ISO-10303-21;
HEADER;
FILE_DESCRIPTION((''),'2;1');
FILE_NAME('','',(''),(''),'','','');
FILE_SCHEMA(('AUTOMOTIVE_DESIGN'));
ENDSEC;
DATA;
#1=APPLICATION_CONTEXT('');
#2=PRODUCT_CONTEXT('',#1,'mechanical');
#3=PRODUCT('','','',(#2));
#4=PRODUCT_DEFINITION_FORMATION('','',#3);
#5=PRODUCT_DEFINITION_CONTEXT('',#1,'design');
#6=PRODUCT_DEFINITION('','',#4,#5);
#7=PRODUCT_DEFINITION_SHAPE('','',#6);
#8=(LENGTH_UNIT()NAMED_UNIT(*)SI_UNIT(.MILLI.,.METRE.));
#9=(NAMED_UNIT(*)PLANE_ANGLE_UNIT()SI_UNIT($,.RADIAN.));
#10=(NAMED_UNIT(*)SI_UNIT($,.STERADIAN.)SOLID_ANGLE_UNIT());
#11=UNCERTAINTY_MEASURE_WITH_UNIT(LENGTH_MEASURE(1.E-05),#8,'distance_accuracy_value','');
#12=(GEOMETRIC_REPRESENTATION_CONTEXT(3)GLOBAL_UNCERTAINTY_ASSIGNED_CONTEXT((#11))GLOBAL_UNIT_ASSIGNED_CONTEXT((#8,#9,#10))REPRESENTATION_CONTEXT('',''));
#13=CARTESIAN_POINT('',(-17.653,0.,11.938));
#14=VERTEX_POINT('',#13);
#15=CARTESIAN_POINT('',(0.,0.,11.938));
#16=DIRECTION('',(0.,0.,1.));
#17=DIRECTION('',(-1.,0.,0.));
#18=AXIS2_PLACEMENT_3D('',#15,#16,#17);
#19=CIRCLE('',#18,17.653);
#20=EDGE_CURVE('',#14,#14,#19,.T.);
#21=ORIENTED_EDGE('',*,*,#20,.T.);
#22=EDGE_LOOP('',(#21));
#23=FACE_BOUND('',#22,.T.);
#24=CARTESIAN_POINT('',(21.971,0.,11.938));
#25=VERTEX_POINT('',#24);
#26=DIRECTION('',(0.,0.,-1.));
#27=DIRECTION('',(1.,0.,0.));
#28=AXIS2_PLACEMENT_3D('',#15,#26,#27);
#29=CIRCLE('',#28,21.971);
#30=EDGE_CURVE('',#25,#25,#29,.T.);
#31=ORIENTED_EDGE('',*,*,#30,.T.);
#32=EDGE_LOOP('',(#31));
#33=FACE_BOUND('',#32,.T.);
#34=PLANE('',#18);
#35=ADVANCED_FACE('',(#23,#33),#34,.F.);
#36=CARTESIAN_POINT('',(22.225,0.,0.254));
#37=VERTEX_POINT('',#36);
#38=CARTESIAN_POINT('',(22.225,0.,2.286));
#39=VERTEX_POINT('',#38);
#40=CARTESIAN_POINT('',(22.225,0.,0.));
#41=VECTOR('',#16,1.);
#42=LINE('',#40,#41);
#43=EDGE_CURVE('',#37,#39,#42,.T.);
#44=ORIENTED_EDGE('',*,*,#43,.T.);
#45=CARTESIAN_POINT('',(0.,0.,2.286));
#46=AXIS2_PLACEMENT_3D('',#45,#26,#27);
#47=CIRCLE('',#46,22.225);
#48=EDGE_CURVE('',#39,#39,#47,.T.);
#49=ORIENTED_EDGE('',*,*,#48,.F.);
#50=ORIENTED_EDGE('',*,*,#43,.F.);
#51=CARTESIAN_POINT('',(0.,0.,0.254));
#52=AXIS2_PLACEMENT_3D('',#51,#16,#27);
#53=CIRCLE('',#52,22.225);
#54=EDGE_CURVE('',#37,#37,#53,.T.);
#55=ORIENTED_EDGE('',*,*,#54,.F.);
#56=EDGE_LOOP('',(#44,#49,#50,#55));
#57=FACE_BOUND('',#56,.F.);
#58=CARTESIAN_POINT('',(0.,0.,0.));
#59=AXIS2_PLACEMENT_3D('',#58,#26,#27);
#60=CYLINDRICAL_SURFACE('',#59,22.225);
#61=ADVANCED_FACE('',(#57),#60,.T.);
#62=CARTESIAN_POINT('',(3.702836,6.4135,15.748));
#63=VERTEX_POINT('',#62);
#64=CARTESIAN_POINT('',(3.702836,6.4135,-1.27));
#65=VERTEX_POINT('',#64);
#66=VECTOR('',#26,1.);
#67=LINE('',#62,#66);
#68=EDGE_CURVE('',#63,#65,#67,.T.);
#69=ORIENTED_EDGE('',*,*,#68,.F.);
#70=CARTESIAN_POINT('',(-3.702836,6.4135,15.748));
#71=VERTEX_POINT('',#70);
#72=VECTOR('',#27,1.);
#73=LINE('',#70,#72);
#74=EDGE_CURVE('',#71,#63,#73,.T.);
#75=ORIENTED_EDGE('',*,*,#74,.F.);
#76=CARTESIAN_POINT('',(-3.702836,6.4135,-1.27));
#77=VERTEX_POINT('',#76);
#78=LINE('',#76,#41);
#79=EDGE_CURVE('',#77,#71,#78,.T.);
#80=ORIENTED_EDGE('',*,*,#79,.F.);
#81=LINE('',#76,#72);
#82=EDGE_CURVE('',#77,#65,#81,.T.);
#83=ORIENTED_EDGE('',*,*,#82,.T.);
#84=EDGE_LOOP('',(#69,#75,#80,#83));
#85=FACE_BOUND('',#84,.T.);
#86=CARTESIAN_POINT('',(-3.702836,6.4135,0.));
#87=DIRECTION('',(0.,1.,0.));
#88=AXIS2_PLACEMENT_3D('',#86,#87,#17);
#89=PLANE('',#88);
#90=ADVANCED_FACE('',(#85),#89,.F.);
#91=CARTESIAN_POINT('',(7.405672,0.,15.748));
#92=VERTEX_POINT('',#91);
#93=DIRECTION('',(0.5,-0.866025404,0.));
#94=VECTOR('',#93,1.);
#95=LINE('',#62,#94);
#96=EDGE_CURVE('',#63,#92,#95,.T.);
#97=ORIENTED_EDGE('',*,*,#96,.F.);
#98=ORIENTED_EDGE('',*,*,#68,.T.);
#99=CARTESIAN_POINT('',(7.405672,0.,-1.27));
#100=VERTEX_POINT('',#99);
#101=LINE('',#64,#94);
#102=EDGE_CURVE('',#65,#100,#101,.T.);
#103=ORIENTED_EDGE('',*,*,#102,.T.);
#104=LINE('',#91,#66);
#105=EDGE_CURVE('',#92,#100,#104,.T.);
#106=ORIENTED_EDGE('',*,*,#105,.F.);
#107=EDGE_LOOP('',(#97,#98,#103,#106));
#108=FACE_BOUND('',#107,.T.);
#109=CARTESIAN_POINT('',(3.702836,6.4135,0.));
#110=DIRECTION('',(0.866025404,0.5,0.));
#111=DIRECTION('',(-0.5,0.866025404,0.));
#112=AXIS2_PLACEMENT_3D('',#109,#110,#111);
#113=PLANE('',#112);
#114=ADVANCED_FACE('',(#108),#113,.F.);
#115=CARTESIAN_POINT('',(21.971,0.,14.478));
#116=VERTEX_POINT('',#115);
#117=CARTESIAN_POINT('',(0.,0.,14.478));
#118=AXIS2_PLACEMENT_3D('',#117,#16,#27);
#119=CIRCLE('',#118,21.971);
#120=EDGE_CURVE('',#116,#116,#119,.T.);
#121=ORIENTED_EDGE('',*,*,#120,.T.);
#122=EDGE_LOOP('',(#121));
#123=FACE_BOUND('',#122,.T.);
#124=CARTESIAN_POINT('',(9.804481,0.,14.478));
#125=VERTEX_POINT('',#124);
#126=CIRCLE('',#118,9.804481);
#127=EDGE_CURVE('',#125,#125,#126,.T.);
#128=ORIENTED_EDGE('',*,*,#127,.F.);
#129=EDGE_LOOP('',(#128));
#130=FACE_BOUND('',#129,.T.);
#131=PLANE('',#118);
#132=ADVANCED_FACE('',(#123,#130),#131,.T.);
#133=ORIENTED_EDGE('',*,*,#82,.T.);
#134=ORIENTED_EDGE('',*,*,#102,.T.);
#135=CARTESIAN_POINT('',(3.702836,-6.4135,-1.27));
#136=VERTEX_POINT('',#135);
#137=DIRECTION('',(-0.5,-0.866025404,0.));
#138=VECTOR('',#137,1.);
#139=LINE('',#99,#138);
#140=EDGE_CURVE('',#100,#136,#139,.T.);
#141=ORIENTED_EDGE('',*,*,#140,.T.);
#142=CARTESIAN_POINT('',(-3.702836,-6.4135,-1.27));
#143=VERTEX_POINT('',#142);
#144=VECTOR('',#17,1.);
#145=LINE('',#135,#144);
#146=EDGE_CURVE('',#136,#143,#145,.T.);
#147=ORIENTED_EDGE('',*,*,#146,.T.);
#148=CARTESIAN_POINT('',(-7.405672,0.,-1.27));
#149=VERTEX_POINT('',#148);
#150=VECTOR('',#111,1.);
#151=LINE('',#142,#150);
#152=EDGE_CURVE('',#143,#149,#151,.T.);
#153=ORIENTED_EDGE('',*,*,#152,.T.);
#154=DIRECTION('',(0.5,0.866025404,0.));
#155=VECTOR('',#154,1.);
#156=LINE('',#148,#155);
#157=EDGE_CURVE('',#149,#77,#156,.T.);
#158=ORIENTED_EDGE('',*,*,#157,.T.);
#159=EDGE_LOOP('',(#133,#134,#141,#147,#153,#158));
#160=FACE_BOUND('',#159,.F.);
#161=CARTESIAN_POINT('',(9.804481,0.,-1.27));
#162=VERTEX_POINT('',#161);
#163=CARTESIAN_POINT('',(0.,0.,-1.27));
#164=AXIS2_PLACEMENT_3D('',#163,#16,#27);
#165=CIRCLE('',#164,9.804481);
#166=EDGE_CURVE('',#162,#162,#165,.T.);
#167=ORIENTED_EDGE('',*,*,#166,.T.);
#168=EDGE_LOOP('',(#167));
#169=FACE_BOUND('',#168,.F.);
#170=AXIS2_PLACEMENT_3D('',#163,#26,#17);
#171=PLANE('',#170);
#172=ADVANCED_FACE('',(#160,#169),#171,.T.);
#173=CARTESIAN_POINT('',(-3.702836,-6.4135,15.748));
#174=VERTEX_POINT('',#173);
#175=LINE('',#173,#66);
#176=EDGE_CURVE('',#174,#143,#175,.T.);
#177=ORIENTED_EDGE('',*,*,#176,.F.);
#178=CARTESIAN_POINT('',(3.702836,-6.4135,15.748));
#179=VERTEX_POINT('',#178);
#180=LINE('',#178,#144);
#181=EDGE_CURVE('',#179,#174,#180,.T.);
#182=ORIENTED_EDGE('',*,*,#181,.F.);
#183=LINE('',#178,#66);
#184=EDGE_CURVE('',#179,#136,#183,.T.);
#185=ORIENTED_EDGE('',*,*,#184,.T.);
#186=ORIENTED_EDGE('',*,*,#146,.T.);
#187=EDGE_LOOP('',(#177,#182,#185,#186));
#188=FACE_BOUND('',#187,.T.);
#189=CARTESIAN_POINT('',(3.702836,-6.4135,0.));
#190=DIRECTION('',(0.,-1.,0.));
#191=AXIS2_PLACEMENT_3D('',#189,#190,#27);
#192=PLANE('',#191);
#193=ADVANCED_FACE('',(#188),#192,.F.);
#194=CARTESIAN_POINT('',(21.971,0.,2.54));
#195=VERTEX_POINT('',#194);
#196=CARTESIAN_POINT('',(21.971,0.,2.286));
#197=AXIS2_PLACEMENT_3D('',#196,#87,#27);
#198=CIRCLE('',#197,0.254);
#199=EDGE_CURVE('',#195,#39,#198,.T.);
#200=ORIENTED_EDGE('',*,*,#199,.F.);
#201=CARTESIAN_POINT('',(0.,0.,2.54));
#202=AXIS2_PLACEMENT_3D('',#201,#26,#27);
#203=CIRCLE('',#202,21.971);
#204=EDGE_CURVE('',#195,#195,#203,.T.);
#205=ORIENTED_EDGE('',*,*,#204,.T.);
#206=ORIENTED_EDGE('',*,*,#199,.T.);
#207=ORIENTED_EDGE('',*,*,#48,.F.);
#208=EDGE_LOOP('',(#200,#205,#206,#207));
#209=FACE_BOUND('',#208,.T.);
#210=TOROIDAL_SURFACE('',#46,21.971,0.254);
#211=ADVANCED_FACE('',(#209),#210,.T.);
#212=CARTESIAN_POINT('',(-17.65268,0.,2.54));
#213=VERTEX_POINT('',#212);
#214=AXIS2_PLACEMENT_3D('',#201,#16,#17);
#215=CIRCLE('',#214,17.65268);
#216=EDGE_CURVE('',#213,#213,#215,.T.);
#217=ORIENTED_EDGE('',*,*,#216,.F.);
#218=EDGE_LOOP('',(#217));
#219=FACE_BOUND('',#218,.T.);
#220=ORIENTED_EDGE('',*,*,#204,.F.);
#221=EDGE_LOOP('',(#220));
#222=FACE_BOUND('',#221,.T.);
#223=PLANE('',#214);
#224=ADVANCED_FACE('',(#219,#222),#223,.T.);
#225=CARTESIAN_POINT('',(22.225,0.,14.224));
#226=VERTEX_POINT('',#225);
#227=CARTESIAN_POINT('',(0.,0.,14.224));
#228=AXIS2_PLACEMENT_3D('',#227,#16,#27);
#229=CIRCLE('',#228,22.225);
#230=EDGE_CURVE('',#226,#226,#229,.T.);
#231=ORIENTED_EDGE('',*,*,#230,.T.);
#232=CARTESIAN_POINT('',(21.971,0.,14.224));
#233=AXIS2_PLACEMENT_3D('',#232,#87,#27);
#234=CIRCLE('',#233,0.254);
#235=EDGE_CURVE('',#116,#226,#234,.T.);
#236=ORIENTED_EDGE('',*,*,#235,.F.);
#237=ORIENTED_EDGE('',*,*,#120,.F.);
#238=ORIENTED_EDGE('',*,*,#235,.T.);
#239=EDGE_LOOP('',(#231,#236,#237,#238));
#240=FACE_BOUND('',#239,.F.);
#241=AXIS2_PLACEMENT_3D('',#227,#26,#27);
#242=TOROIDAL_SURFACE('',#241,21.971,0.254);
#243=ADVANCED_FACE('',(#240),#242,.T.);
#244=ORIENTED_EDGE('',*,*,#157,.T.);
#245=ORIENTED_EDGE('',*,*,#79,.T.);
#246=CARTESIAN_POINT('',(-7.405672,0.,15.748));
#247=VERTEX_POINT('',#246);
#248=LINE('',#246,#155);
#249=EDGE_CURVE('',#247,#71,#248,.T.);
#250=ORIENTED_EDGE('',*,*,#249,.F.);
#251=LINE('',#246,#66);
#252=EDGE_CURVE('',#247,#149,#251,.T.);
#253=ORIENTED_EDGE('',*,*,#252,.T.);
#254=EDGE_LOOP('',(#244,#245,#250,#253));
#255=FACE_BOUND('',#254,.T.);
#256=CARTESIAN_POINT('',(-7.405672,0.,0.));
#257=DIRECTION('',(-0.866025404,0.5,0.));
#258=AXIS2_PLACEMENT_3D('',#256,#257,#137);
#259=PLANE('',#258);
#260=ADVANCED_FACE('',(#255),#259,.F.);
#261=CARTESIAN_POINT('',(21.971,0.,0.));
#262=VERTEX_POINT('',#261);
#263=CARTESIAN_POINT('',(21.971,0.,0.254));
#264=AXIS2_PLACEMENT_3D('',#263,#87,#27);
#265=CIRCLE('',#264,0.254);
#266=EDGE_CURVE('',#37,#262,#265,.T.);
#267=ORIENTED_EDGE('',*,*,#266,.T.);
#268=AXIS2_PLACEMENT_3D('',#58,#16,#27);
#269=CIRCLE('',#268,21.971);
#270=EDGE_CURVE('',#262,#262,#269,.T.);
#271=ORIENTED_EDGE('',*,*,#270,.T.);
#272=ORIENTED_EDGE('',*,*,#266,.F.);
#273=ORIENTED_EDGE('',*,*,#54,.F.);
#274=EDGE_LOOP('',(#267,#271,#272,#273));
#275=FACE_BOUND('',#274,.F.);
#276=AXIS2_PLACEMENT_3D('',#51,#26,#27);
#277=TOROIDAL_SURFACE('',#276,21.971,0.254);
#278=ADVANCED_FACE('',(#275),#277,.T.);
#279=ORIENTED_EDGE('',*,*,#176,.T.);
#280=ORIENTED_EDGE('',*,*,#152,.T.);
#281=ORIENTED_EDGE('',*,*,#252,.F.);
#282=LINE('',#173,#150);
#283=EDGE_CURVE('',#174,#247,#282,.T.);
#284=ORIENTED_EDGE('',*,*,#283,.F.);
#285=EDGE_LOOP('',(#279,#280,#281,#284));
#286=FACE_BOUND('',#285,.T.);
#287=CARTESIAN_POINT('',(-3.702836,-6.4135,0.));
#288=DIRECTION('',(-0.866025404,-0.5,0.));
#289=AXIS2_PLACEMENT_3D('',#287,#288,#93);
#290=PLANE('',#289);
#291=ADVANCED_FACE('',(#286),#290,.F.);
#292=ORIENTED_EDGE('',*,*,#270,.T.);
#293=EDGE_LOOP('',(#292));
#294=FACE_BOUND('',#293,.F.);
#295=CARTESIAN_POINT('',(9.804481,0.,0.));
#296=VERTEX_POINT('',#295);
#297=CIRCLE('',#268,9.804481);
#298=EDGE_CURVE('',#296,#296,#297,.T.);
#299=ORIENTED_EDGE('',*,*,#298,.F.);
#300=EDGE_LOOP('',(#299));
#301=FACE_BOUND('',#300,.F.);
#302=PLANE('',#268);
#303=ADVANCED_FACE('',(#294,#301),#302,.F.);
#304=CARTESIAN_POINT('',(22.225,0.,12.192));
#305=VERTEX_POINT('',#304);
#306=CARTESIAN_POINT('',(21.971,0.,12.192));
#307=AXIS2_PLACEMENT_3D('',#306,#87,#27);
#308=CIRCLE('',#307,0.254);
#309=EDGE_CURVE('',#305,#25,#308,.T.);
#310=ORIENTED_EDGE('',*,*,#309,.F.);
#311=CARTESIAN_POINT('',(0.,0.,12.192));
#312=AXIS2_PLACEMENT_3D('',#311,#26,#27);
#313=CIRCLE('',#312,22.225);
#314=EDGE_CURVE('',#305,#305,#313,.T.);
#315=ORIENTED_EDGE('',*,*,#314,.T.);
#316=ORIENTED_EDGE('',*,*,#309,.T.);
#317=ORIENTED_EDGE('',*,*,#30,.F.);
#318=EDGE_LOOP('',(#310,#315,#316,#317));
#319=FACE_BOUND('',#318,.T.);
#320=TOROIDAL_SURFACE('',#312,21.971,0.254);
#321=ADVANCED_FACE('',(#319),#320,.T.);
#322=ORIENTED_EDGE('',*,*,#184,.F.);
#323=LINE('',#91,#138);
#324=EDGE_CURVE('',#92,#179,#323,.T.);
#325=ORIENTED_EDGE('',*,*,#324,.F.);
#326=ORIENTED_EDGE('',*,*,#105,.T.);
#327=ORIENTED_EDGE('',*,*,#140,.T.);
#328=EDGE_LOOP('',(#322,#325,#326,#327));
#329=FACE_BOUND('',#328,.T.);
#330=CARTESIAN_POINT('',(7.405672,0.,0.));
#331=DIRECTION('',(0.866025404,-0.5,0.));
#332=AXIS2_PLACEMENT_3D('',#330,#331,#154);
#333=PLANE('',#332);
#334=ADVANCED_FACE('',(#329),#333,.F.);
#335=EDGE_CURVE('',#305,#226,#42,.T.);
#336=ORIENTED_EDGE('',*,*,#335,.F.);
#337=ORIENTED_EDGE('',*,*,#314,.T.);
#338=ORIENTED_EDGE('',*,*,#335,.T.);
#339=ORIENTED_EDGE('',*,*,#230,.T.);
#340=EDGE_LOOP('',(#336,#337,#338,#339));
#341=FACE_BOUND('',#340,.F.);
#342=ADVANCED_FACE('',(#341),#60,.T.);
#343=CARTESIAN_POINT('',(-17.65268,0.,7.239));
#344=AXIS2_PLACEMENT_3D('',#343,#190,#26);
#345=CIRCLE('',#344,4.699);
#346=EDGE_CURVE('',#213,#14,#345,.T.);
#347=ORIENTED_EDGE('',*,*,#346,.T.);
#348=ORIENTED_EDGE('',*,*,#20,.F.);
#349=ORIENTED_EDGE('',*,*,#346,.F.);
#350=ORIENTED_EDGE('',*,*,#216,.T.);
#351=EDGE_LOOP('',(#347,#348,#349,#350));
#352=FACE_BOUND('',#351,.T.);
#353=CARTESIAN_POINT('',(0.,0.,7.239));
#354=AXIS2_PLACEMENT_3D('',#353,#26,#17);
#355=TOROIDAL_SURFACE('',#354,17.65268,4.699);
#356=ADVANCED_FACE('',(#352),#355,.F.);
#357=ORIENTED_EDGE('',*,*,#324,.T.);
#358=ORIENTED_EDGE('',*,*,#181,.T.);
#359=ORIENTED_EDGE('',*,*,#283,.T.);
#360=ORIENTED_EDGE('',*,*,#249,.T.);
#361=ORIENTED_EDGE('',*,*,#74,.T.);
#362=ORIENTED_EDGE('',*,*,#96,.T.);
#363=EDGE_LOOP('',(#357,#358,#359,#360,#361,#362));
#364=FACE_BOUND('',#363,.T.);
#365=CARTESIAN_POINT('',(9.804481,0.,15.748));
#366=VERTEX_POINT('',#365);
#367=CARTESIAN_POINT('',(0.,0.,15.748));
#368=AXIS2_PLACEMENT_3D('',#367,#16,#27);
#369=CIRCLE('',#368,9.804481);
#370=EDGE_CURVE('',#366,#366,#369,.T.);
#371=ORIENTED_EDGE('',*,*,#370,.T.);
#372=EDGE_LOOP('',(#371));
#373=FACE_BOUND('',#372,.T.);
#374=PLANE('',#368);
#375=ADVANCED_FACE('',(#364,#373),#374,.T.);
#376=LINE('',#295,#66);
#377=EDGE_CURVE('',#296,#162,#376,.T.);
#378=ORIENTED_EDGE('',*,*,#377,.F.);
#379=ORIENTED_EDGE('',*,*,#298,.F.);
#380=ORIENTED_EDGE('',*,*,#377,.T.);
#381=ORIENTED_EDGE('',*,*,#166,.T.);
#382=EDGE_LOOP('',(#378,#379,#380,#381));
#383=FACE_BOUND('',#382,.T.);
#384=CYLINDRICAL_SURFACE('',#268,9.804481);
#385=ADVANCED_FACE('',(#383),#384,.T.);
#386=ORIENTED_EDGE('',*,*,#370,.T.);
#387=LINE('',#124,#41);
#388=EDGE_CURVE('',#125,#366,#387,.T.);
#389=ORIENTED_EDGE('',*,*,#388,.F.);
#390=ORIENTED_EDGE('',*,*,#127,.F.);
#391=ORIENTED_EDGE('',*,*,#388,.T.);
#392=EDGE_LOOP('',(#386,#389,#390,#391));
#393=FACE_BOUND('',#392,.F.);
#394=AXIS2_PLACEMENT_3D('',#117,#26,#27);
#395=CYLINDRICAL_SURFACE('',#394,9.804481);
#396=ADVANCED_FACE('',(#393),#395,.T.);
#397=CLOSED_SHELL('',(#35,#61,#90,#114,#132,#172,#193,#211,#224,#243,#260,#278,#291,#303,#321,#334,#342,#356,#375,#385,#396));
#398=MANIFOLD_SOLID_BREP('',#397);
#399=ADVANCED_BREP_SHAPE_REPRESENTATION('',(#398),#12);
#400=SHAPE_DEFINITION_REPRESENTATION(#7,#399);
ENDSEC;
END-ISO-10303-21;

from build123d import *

# Parameters (mm, degrees)
F0_R     = 22.225
F1_DEPTH = 14.478
F4_R     = 9.8044812149
F5_DEPTH = 1.27
F7_R     = 0.254


# Not quite as in the source:
# - a pattern or mirror of a feature is missing from the dataset's text; its kind, count and spacing are read off the source's solid


with BuildPart() as f1:
    # F0 (on Top) → F1 (new body)
    with BuildSketch(Plane.XY):
        Circle(F0_R)
        Polygon((-7.4056719029, 0), (-3.7028359514, 6.4135), (3.7028359514, 6.4135), (7.4056719029, 0), (3.7028359514, -6.4135), (-3.7028359514, -6.4135), align=None, mode=Mode.SUBTRACT)
    extrude(amount=F1_DEPTH)

    # F2 (on Front) → F3 (revolve, cut)
    with BuildSketch(Plane.XZ):
        with BuildLine():
            Line((-22.225, 11.938), (-22.225, 2.54))
            Line((-22.225, 2.54), (-17.6526800774, 2.54))
            ThreePointArc((-17.6526800774, 2.54), (-12.9536800747, 7.2391599667), (-17.653, 11.938))
            Line((-17.653, 11.938), (-22.225, 11.938))
        make_face()
    revolve(axis=Axis((0, 0, 14.478), (0, 0, 1)), mode=Mode.SUBTRACT)

    # F4 (on face) → F5 (join)
    with BuildSketch(Plane.XY.offset(14.478)):
        Circle(F4_R)
        Polygon((-3.7028359514, 6.4135), (3.7028359514, 6.4135), (7.4056719029, 0), (3.7028359514, -6.4135), (-3.7028359514, -6.4135), (-7.4056719029, 0), align=None, mode=Mode.SUBTRACT)
    f5 = extrude(amount=F5_DEPTH)

    # F5_copies: F5 across plane
    add(f5.mirror(Plane(origin=(0, 0, 7.239), x_dir=(-1, 0, 0), z_dir=(0, 0, -1))))

    # F7
    f7_edges = [f1.edges().sort_by_distance(p)[0] for p in [
        (-22.225, 0, 0),
        (-22.225, 0, 14.478),
        (-22.225, 0, 11.938),
        (22.225, 0, 1.27),
        (-22.225, 0, 2.54),
    ]]
    fillet(f7_edges, radius=F7_R)


solid = f1.part
